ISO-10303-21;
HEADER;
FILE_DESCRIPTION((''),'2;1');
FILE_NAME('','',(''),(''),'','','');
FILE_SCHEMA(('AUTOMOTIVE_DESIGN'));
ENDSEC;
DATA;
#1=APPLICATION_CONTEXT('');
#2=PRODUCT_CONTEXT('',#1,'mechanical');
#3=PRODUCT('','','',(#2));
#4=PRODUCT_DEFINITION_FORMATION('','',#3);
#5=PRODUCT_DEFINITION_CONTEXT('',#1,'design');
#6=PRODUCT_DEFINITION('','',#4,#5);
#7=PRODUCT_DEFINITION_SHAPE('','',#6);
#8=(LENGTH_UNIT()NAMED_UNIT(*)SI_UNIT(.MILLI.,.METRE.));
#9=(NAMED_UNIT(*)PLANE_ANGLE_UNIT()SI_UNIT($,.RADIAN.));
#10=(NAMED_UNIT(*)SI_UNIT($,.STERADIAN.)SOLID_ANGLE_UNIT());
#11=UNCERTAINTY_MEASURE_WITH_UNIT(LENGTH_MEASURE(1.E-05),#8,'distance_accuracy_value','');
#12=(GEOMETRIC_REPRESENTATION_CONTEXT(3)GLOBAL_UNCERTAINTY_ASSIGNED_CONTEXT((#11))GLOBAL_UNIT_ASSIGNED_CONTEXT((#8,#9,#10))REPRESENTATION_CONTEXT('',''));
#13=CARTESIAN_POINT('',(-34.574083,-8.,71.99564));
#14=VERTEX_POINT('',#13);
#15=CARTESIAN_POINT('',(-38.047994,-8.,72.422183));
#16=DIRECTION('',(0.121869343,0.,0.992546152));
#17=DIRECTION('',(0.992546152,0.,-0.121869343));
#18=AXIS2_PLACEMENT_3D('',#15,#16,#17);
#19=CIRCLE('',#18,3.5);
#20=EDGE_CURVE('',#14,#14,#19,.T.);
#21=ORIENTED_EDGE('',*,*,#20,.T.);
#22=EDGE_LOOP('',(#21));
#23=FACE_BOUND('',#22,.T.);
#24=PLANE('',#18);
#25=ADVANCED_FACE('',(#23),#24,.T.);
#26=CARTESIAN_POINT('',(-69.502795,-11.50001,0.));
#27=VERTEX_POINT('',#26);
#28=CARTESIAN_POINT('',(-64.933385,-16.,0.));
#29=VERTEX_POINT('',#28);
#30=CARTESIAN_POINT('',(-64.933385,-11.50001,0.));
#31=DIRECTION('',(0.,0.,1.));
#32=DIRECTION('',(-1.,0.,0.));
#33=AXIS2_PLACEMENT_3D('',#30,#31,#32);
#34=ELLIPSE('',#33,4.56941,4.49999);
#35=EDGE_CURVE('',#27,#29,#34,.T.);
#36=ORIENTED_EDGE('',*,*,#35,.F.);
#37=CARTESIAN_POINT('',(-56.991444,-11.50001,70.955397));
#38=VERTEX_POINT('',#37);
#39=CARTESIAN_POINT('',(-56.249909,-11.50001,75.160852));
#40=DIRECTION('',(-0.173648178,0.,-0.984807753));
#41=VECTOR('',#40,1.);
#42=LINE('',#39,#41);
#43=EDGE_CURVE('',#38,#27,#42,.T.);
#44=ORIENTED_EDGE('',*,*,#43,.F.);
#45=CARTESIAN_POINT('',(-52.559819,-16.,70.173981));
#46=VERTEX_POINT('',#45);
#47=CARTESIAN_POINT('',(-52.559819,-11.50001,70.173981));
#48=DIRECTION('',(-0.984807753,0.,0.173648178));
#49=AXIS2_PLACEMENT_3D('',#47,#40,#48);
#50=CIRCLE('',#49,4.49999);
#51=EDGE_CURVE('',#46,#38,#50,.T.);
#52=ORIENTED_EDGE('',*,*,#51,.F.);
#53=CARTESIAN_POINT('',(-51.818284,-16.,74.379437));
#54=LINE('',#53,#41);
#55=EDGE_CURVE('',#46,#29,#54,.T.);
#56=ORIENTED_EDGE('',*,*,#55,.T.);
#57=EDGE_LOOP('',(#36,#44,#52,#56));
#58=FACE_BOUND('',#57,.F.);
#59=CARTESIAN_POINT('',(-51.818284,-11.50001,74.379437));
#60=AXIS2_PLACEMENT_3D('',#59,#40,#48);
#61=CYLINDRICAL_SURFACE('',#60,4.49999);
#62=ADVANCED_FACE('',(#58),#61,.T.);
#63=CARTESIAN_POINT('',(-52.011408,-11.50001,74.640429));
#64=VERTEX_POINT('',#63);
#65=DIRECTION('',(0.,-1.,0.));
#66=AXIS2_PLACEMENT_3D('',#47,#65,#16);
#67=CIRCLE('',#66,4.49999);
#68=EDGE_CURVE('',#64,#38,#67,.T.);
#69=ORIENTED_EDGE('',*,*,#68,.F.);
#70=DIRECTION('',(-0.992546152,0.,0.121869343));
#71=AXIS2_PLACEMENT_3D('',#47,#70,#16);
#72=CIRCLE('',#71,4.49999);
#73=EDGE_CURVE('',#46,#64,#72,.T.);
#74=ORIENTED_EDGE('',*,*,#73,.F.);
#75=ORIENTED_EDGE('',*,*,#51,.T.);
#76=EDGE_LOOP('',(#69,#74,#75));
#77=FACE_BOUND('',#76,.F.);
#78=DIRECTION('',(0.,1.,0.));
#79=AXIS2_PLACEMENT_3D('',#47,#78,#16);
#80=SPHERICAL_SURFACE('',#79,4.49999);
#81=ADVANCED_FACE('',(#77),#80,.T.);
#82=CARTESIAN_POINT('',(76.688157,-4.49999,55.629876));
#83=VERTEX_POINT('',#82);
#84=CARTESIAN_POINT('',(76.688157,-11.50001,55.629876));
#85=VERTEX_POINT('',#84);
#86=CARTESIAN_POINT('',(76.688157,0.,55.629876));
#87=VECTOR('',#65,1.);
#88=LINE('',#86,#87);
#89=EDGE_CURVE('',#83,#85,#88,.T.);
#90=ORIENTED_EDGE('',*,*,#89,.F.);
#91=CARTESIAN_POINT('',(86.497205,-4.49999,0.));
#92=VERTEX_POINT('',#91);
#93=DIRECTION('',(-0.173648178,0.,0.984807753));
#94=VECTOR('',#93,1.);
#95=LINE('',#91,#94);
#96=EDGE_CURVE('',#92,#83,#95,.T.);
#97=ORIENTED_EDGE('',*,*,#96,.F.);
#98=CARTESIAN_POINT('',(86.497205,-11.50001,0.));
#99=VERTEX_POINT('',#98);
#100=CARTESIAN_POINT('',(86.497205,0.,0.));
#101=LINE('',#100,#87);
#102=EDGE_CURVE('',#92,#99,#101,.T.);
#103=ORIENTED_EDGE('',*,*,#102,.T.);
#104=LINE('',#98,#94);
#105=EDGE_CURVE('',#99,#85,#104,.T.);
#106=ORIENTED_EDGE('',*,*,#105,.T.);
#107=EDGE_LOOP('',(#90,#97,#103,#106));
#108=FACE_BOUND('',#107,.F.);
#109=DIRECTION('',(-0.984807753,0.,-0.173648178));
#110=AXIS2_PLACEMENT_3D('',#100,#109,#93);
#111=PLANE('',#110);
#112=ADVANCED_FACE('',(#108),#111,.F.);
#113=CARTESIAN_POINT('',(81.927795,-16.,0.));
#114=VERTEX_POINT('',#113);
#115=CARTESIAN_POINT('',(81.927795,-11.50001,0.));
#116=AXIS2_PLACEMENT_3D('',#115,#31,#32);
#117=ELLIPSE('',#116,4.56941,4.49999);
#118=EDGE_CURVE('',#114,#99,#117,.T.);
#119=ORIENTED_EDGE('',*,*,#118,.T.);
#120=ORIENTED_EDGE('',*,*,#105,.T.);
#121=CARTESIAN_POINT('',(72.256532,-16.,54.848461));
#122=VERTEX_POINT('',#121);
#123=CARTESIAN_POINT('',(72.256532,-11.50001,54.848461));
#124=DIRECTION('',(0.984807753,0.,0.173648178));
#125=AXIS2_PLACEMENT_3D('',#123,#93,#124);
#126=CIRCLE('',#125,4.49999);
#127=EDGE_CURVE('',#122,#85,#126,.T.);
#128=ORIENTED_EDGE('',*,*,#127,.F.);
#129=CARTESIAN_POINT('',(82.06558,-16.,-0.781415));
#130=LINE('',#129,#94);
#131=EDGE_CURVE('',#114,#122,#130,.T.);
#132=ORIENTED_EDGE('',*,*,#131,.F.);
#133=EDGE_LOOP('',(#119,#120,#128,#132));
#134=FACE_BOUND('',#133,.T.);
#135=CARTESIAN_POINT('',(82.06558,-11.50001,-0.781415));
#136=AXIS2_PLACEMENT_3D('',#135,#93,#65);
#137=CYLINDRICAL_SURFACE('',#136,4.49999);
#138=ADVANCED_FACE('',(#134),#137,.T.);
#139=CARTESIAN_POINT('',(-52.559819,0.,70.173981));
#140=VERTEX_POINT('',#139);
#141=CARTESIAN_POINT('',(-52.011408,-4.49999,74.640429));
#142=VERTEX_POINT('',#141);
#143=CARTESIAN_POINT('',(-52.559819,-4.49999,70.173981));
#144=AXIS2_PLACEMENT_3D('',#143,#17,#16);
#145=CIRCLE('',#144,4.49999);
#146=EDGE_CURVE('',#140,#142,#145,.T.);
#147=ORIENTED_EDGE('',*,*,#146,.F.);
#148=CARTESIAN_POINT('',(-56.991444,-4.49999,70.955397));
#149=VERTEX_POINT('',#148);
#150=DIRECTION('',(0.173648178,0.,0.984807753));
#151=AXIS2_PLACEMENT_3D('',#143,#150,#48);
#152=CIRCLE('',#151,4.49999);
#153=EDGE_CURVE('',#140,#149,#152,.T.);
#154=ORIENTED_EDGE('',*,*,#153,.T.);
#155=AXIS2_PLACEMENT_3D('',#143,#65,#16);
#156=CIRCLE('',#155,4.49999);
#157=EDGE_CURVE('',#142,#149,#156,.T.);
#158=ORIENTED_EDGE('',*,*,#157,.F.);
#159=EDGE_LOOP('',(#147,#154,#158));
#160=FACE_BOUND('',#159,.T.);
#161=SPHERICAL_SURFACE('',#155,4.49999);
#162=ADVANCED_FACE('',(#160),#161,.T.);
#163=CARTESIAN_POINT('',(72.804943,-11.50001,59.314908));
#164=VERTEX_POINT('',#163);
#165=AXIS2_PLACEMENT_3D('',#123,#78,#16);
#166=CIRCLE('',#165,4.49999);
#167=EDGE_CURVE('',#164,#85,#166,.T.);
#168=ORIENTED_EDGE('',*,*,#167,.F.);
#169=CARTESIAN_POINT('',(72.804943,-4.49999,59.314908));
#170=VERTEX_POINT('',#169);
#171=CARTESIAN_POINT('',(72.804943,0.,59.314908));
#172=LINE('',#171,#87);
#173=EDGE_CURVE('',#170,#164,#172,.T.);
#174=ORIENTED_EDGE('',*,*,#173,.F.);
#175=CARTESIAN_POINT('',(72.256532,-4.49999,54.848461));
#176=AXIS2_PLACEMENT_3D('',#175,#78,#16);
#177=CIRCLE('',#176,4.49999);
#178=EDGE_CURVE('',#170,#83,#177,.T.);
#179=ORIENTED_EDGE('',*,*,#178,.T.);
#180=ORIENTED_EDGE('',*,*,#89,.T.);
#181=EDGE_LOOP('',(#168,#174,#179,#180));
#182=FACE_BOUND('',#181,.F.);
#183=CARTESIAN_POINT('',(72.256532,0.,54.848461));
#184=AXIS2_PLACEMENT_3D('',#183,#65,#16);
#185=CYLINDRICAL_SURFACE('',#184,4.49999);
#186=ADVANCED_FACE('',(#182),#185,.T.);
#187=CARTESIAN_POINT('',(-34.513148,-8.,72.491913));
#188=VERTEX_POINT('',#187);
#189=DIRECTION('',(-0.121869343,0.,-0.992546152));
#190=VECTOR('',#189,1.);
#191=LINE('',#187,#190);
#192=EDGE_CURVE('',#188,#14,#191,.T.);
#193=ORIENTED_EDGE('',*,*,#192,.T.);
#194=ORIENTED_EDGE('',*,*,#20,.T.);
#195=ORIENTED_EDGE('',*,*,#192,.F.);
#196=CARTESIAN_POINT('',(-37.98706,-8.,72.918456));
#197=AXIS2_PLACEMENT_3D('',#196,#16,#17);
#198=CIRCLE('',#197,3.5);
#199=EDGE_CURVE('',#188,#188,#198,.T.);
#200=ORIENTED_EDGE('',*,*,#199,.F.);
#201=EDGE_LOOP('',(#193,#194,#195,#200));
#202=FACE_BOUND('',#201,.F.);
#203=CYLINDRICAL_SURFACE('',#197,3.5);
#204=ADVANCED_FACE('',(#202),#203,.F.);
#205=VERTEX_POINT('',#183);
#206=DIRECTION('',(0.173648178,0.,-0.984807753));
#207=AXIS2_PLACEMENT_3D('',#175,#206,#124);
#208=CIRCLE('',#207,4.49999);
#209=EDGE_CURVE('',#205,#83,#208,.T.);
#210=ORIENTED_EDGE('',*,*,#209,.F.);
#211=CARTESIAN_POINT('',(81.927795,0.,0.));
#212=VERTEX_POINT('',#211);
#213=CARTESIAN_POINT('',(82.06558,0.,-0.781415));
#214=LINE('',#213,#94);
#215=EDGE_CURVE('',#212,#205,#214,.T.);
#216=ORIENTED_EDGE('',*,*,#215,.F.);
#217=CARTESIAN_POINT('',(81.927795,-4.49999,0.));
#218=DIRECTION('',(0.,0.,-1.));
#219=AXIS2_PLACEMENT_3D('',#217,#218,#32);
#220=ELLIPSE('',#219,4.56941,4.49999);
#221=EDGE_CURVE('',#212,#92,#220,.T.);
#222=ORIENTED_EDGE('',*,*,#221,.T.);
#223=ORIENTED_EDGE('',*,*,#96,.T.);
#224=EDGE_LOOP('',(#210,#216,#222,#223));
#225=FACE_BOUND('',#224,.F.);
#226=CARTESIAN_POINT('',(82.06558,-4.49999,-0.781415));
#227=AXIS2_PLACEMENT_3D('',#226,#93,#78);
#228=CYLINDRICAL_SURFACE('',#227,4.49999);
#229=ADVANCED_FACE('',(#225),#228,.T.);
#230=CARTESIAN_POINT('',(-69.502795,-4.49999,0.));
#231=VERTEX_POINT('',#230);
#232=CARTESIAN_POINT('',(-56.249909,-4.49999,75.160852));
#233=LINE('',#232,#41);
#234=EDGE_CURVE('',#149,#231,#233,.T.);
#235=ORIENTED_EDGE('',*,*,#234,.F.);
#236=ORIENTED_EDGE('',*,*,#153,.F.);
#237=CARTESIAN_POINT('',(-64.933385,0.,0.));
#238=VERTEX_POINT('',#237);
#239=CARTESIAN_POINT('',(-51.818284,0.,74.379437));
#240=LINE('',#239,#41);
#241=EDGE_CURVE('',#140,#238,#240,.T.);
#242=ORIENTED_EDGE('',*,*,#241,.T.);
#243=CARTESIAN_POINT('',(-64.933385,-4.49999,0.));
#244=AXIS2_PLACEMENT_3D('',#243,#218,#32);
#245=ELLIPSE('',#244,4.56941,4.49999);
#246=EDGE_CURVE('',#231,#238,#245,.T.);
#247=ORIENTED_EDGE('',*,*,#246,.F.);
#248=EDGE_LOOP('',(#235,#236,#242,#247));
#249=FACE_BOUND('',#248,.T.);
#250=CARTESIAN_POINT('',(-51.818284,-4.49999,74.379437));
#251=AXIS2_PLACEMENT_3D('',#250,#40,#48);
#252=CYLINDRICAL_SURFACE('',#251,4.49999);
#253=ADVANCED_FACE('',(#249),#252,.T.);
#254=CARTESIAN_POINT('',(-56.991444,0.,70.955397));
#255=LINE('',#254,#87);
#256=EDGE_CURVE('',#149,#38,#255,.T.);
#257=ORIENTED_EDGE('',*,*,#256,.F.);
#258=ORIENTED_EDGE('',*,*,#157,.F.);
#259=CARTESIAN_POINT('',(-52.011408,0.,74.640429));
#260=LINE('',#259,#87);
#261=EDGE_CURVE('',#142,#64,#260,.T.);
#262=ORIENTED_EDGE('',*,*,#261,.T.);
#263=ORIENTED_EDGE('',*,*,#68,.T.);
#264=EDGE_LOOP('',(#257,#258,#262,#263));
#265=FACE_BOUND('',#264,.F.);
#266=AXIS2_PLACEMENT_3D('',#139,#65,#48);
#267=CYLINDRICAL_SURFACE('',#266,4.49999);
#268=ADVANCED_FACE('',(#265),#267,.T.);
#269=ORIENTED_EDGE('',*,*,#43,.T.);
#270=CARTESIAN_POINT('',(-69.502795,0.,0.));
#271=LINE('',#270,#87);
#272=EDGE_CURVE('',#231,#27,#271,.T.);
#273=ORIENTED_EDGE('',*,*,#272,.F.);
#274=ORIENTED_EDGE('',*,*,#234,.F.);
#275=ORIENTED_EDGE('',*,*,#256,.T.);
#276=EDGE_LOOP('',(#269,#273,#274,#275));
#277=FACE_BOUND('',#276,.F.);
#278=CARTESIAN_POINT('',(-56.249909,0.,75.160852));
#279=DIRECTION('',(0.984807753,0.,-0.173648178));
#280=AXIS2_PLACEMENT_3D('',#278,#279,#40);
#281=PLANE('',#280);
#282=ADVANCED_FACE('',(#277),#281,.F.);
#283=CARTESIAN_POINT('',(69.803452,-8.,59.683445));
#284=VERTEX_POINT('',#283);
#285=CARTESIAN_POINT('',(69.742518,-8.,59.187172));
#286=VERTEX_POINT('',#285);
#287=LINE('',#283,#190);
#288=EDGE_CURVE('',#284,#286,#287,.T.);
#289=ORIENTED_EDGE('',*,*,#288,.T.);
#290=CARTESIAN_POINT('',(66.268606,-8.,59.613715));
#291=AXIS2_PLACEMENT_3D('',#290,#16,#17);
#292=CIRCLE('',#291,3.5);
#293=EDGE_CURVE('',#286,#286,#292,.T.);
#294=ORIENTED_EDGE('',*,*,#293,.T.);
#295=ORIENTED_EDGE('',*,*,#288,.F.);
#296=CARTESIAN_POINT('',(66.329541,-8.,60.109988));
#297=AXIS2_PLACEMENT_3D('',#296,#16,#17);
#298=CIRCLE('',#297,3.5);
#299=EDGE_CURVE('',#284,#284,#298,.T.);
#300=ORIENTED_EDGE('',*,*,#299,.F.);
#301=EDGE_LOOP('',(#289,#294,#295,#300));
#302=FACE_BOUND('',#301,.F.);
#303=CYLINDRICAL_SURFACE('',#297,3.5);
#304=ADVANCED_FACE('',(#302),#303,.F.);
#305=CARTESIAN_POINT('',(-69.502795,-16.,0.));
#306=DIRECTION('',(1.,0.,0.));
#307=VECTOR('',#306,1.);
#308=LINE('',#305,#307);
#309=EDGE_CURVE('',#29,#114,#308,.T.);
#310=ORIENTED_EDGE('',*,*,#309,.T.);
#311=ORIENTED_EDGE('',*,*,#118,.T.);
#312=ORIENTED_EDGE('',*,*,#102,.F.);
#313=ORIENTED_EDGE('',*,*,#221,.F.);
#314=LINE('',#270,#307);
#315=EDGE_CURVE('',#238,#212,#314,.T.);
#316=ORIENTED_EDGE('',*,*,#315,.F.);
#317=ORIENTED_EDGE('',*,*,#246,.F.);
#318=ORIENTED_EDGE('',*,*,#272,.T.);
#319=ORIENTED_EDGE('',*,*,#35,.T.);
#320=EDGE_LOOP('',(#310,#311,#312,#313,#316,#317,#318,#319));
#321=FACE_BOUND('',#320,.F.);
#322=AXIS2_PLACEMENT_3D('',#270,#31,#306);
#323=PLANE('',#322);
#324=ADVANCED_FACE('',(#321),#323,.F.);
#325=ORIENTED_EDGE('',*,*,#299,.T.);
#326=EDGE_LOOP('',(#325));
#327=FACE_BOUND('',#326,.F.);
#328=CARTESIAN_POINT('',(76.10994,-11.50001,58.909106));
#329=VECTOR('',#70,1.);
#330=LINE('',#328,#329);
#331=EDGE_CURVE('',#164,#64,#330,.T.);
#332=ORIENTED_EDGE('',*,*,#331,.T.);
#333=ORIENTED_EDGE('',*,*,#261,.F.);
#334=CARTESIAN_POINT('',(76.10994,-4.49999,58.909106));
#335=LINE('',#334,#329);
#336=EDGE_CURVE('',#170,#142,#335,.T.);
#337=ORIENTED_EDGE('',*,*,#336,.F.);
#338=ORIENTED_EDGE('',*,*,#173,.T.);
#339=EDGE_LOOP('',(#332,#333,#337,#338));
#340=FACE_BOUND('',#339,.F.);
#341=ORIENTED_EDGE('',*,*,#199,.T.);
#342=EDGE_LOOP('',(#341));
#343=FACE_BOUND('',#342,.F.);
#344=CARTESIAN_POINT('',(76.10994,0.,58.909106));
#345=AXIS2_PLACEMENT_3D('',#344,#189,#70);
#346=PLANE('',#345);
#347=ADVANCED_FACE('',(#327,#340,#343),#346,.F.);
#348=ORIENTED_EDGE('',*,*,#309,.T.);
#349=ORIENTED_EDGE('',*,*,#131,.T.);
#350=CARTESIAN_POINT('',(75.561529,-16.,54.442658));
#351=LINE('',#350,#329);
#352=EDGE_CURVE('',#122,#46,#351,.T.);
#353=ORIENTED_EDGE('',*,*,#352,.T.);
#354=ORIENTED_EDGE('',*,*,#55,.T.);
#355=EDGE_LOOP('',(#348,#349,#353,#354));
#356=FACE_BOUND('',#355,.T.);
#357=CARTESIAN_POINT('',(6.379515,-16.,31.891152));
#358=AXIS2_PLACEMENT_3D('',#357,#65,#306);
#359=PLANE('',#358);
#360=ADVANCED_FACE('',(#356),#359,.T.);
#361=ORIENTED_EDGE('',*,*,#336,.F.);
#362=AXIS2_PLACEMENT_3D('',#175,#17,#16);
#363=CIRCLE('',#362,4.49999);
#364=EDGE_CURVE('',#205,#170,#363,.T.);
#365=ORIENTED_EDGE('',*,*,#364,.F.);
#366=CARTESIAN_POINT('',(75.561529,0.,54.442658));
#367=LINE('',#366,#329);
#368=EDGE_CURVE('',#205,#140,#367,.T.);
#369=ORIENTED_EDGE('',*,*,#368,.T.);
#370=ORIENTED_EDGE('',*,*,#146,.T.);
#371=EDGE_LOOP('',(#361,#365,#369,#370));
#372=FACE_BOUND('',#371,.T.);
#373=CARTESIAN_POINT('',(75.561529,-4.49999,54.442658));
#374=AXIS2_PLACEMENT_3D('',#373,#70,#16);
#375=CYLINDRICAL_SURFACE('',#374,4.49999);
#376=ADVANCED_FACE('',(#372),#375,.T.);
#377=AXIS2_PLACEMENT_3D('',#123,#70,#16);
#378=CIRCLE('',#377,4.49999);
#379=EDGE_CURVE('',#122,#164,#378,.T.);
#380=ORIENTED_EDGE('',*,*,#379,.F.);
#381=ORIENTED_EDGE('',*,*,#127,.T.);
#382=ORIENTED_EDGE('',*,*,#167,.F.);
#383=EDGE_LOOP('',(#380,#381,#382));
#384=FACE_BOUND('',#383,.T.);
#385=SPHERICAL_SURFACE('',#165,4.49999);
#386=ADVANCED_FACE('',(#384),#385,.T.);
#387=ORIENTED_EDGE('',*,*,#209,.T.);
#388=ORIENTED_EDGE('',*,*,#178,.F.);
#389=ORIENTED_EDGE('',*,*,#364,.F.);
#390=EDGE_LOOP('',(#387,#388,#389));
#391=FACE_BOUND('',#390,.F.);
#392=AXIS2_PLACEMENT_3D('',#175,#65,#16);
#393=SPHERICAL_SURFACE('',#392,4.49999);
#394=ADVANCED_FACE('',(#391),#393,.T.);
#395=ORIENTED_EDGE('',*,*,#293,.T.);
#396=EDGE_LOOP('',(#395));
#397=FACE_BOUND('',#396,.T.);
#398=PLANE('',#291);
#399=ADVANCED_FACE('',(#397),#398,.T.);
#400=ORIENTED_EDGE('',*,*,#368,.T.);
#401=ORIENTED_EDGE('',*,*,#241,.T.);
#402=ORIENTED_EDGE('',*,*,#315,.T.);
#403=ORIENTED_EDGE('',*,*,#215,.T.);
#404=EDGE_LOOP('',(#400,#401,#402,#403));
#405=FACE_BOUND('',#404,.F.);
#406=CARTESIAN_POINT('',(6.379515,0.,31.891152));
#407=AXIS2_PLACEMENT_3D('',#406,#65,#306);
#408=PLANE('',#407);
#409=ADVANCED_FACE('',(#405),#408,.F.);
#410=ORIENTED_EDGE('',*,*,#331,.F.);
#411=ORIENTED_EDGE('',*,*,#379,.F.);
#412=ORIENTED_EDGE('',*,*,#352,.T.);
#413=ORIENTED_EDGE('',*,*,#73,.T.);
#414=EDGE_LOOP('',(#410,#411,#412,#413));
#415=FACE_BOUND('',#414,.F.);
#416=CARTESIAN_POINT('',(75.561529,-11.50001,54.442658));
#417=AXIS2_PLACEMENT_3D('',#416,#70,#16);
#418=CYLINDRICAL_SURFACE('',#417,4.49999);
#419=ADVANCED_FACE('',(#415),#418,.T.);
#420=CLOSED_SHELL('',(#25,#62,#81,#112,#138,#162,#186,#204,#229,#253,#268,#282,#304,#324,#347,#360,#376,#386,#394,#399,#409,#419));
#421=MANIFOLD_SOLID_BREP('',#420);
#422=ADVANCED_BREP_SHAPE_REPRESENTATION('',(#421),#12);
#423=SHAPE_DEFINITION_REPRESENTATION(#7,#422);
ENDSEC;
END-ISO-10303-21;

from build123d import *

# Parameters (mm, degrees)
F1_DEPTH = 16
F2_R     = 3.5
F3_DEPTH = 0.5
F4_R     = 4.49999


# Not quite as in the source:
# - a fillet or chamfer is up to 0.001 mm smaller than in the source, because OpenCascade refuses the exact size


with BuildPart() as f1:
    # F0 (on Front) → F1 (new body)
    with BuildSketch(Plane.XZ):
        Polygon((-56.24990897, 75.1608516625), (-69.5027950111, 0), (86.4972049889, 0), (76.1099402454, 58.9091056954), align=None)
    extrude(amount=F1_DEPTH)

    # F2 (on face) → F3 (cut)
    with BuildSketch(Plane(origin=(8.256096508, 0, 67.2405101043), x_dir=(0.9925461516, 0, -0.1218693434), z_dir=(0.1218693434, 0, 0.9925461516))):
        with Locations((-46.5904343202, -8)):
            Circle(F2_R)
        with Locations((58.5095656798, -8)):
            Circle(F2_R)
    extrude(amount=-F3_DEPTH, mode=Mode.SUBTRACT)

    # F4 (radius 4.5 in the source; OpenCascade refuses exactly that, so slightly less here)
    f4_edges = [f1.edges().sort_by_distance(p)[0] for p in [
        (9.930016, -16, 67.034979),
        (9.930016, 0, 67.034979),
        (81.303573, 0, 29.454553),
        (81.303573, -16, 29.454553),
        (-62.876352, -16, 37.580426),
        (-62.876352, 0, 37.580426),
        (-56.249909, -8, 75.160852),
        (76.10994, -8, 58.909106),
    ]]
    fillet(f4_edges, radius=F4_R)


solid = f1.part
